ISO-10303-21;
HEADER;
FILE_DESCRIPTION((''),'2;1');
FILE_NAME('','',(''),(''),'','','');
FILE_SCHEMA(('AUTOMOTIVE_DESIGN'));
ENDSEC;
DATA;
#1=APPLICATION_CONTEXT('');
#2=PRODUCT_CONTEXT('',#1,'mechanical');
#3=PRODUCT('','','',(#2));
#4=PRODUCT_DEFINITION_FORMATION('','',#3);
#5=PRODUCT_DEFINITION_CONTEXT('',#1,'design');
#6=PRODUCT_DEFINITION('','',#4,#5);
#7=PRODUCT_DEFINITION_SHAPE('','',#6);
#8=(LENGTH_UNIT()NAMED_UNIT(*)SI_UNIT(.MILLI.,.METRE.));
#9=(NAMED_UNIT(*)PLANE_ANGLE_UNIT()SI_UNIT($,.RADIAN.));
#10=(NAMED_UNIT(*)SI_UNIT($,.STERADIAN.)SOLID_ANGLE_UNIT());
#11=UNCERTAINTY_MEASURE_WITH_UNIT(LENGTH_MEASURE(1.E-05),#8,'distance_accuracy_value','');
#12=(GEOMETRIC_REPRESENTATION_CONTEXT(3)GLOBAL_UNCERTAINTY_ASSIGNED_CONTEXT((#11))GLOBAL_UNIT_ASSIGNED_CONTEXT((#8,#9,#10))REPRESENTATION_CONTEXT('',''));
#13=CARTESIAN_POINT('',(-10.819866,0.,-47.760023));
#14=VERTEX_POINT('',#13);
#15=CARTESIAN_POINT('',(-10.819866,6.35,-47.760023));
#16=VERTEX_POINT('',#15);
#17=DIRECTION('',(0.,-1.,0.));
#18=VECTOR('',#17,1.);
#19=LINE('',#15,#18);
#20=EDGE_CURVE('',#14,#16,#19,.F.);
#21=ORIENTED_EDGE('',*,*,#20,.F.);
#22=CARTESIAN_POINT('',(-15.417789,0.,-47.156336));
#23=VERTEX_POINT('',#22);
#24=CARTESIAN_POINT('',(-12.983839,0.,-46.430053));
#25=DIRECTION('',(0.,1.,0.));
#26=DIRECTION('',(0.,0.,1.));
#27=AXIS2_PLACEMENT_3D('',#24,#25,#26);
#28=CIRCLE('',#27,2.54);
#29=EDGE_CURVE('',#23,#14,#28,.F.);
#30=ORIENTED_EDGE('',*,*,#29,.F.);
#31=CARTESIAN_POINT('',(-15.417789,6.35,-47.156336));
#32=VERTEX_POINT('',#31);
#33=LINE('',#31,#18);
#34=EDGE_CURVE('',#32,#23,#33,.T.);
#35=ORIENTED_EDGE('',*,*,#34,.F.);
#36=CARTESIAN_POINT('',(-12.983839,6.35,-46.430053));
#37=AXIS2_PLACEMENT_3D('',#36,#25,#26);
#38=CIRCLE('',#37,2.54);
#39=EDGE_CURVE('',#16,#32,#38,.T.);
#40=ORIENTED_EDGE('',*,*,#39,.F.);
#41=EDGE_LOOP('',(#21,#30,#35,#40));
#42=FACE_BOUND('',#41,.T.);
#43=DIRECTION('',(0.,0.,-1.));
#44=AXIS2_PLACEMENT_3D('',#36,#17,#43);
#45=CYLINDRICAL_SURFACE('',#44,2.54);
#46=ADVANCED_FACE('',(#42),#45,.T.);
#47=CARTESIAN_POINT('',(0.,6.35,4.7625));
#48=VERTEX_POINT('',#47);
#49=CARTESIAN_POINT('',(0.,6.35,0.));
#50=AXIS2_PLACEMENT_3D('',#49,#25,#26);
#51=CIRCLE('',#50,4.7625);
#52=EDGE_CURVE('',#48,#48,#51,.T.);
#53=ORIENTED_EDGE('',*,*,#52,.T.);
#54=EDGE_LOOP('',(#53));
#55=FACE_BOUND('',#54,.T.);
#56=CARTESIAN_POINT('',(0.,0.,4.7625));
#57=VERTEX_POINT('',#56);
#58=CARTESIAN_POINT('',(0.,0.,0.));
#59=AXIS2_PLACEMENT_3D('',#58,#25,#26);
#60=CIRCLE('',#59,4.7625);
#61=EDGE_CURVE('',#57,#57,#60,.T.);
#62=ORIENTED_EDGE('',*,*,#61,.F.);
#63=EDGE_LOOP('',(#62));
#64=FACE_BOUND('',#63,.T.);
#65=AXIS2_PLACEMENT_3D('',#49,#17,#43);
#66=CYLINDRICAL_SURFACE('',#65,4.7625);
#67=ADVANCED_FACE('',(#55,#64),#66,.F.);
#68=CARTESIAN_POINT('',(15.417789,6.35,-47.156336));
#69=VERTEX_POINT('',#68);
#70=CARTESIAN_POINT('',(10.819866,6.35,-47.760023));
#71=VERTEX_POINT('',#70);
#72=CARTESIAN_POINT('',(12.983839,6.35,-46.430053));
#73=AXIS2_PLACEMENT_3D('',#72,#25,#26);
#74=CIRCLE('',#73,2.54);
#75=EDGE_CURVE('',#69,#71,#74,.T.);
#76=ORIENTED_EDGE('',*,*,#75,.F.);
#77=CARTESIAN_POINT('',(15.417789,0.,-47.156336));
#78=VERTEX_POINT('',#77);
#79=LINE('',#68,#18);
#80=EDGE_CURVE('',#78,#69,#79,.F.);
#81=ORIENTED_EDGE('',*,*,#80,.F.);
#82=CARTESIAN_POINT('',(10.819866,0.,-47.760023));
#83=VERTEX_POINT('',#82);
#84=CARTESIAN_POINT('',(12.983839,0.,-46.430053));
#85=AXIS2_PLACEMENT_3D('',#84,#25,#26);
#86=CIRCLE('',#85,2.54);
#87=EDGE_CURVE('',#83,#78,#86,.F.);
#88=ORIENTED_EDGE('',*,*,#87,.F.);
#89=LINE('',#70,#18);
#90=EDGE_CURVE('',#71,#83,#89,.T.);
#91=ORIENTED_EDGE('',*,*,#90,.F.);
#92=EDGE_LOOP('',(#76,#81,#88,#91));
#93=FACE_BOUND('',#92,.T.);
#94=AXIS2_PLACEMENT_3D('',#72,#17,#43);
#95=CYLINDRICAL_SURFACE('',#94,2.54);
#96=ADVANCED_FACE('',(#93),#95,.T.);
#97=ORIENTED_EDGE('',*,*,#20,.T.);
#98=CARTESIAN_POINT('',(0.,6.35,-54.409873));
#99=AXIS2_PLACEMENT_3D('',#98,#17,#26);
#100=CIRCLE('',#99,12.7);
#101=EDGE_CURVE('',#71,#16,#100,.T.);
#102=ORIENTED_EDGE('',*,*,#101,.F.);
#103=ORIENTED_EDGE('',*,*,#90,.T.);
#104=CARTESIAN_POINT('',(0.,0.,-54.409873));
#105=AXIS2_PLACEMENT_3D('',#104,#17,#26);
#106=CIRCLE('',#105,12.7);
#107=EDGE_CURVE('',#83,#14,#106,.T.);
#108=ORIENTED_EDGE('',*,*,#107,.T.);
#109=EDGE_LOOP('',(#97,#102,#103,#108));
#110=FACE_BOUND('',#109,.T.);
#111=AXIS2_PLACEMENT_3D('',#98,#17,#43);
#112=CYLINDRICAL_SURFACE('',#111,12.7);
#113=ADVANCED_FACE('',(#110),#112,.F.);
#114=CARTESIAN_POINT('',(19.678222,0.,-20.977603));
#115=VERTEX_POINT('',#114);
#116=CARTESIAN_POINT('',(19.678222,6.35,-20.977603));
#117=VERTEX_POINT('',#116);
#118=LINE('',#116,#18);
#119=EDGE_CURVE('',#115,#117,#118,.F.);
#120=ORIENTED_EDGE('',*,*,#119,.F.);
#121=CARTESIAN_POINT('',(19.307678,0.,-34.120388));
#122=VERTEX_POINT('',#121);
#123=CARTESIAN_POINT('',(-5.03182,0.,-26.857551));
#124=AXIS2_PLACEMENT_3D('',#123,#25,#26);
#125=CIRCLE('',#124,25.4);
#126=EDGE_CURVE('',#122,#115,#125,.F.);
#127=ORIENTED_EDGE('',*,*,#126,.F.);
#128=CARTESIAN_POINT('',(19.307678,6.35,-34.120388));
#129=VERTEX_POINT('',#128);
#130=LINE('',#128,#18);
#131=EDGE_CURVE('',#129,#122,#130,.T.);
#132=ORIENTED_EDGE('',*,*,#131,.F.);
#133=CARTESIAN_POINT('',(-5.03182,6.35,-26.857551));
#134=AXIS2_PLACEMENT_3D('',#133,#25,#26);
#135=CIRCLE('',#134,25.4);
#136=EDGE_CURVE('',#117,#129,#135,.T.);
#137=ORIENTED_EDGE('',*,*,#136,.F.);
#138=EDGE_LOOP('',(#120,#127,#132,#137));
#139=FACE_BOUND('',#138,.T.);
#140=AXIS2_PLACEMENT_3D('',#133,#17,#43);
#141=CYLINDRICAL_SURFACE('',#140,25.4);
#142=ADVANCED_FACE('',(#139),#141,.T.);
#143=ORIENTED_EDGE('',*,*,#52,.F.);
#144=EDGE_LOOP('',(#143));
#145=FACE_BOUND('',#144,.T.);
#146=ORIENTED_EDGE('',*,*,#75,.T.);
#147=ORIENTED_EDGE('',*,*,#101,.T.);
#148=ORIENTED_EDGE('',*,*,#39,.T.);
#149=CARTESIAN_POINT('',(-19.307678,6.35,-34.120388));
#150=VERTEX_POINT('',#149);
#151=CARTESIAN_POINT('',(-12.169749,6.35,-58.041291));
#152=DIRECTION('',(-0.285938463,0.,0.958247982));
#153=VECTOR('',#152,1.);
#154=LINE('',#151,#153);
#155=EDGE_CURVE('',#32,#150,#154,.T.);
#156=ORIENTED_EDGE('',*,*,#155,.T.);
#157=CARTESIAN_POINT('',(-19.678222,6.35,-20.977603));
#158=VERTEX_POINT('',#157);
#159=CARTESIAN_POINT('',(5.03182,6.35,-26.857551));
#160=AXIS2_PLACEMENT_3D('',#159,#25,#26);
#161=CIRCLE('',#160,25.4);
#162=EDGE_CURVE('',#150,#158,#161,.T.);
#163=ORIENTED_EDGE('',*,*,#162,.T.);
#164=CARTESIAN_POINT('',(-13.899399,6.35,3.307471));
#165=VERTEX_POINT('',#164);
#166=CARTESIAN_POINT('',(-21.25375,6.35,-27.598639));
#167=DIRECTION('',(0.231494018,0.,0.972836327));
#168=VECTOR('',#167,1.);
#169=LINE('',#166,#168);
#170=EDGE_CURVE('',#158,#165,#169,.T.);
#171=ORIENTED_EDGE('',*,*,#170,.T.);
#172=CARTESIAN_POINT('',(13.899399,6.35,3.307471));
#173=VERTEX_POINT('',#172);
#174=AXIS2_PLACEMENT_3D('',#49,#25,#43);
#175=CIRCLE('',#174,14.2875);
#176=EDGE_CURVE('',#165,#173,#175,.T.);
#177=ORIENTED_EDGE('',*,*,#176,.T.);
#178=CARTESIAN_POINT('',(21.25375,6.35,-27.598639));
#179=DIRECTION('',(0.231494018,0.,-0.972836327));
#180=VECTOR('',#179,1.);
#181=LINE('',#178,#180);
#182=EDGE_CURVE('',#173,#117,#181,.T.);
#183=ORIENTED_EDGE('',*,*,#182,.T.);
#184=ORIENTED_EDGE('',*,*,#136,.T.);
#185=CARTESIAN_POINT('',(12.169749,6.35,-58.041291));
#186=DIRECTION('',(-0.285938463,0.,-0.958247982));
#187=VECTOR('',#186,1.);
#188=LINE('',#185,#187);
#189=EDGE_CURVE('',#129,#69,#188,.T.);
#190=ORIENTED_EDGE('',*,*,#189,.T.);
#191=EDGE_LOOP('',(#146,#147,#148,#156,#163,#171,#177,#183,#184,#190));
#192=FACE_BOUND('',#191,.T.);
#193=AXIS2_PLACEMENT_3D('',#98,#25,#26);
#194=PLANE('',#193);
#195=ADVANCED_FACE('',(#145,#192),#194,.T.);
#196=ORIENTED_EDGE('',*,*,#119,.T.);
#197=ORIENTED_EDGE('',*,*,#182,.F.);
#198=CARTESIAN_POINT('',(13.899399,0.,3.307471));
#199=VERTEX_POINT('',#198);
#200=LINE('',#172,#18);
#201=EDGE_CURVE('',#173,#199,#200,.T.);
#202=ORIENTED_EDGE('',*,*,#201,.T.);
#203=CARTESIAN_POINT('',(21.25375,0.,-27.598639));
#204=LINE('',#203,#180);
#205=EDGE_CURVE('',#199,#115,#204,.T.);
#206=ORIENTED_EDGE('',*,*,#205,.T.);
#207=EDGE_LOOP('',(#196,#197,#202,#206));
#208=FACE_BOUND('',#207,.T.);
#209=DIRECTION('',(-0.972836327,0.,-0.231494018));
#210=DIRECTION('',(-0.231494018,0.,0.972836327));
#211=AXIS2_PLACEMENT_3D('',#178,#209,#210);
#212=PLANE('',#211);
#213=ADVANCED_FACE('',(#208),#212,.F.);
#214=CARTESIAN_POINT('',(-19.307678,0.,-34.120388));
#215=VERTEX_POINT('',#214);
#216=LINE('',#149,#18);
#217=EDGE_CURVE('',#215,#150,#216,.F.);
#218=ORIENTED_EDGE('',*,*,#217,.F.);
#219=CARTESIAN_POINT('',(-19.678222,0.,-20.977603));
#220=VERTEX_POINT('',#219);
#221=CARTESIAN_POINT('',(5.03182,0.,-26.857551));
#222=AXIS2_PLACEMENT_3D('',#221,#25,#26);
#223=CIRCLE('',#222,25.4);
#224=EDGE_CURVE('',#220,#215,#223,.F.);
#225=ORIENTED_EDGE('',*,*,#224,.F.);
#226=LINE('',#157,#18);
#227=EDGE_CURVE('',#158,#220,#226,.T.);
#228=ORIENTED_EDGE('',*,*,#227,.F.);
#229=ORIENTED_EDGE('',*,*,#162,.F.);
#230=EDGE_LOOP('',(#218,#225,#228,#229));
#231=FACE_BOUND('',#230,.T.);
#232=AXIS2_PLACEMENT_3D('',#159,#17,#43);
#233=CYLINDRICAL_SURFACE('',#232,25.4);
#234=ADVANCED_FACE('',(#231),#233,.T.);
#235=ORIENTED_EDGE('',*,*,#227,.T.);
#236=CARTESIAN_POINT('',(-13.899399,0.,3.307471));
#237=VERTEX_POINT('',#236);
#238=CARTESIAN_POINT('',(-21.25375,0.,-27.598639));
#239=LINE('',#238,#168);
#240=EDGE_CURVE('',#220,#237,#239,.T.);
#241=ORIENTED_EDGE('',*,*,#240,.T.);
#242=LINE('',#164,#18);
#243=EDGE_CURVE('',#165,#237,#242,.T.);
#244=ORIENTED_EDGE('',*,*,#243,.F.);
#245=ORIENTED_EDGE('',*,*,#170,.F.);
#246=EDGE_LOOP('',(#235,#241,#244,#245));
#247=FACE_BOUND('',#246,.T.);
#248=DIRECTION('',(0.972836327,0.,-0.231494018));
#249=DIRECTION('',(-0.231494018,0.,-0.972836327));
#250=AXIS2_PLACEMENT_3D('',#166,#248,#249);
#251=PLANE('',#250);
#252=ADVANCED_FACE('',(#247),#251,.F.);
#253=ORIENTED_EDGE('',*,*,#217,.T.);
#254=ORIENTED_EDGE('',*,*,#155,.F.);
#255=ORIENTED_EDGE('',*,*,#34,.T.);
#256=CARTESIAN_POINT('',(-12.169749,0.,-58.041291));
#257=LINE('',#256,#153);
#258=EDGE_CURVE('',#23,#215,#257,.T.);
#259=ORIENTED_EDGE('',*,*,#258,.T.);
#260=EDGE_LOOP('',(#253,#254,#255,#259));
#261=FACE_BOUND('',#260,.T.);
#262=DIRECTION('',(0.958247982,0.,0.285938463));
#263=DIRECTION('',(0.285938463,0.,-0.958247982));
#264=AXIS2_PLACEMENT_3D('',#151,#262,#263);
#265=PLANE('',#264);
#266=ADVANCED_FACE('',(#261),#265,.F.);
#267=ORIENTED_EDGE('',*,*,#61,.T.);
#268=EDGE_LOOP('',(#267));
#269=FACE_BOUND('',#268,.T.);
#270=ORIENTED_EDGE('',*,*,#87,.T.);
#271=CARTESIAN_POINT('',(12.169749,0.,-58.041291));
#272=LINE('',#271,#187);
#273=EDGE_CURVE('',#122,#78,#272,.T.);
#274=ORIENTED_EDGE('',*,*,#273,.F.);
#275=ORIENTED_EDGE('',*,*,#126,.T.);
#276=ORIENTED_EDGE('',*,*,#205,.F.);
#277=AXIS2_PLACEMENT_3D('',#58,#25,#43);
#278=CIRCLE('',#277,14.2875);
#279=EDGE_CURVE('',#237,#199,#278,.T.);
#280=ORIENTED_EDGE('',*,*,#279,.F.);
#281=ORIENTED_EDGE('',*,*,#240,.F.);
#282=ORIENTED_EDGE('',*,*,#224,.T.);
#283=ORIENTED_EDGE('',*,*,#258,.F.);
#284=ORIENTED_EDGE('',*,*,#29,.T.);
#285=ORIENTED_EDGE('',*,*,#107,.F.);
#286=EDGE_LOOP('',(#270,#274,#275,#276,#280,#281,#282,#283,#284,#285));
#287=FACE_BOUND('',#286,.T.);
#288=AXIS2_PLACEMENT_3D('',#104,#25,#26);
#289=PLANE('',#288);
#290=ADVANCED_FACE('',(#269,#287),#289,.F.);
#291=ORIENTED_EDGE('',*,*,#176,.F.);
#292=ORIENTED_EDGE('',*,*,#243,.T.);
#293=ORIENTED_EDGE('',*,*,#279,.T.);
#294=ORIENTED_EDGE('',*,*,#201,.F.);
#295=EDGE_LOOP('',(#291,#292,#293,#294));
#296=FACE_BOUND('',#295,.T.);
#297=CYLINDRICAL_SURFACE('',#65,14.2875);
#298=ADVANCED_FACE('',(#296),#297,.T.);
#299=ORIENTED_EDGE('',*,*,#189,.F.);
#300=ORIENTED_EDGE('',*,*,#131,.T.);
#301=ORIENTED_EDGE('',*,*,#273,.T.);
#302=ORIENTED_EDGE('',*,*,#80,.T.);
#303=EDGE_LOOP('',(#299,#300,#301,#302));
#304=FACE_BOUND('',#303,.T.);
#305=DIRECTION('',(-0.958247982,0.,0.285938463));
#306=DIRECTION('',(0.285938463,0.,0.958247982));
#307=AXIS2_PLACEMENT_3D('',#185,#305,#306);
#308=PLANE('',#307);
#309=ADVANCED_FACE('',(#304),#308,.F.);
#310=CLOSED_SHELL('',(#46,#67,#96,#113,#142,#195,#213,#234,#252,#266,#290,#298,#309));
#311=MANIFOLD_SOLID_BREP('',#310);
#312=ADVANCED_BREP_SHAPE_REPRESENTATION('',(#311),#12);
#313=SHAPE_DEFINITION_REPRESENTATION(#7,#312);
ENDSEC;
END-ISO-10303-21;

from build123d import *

# Parameters (mm, degrees)
SKETCH13_R          = 4.7625
BOSS_EXTRUDE1_DEPTH = 6.35
FILLET1_START       = -1
FILLET1_DEPTH       = 8
FILLET2_R           = 25.4


with BuildPart() as part:
    # Sketch13 → Boss-Extrude1 (new body)
    with BuildSketch(Plane(origin=(0, 0, 0), x_dir=(1, 0, 0), z_dir=(0, 1, 0))):
        with BuildLine():
            Line((12.169749373, 58.041291034), (21.253749792, 27.59863924))
            Line((21.253749792, 27.59863924), (13.899399026, -3.307470782))
            ThreePointArc((13.899399026, -3.307470782), (0, -14.2875), (-13.899399026, -3.307470782))
            Line((-13.899399026, -3.307470782), (-21.253749792, 27.59863924))
            Line((-21.253749792, 27.59863924), (-12.169749373, 58.041291034))
            ThreePointArc((-12.169749373, 58.041291034), (0, 41.709872551), (12.169749373, 58.041291034))
        make_face()
        with Locations(Location((0, 0, 0), (0, 0, 270))):
            Circle(SKETCH13_R, mode=Mode.SUBTRACT)
    extrude(amount=BOSS_EXTRUDE1_DEPTH)

    # Fillet1: read off the stored shape, not the designer's step
    # Fillet1 outline → Fillet1 (cut)
    with BuildSketch(Plane(origin=(0, 0, 0), x_dir=(1, 0, 0), z_dir=(0, 1, 0)).offset(FILLET1_START)):
        with BuildLine():
            ThreePointArc((12.169749373, 58.041291034), (12.591930806, 52.756609539), (10.819865776, 47.760022584))
            ThreePointArc((10.819865776, 47.760022584), (13.314491534, 48.948438752), (15.417788806, 47.156336287))
            Line((15.417788806, 47.156336287), (12.169749373, 58.041291034))
        make_face()
        with BuildLine():
            ThreePointArc((-15.417788806, 47.156336287), (-13.314491534, 48.948438752), (-10.819865776, 47.760022584))
            ThreePointArc((-10.819865776, 47.760022584), (-12.591930806, 52.756609539), (-12.169749373, 58.041291034))
            Line((-12.169749373, 58.041291034), (-15.417788806, 47.156336287))
        make_face()
    extrude(amount=FILLET1_DEPTH, mode=Mode.SUBTRACT)

    # Fillet2
    fillet2_edges = [part.edges().sort_by_distance(p)[0] for p in [
        (21.253749792, 3.175, -27.59863924),
        (-21.253749792, 3.175, -27.59863924),
    ]]
    fillet(fillet2_edges, radius=FILLET2_R)


solid = part.part
